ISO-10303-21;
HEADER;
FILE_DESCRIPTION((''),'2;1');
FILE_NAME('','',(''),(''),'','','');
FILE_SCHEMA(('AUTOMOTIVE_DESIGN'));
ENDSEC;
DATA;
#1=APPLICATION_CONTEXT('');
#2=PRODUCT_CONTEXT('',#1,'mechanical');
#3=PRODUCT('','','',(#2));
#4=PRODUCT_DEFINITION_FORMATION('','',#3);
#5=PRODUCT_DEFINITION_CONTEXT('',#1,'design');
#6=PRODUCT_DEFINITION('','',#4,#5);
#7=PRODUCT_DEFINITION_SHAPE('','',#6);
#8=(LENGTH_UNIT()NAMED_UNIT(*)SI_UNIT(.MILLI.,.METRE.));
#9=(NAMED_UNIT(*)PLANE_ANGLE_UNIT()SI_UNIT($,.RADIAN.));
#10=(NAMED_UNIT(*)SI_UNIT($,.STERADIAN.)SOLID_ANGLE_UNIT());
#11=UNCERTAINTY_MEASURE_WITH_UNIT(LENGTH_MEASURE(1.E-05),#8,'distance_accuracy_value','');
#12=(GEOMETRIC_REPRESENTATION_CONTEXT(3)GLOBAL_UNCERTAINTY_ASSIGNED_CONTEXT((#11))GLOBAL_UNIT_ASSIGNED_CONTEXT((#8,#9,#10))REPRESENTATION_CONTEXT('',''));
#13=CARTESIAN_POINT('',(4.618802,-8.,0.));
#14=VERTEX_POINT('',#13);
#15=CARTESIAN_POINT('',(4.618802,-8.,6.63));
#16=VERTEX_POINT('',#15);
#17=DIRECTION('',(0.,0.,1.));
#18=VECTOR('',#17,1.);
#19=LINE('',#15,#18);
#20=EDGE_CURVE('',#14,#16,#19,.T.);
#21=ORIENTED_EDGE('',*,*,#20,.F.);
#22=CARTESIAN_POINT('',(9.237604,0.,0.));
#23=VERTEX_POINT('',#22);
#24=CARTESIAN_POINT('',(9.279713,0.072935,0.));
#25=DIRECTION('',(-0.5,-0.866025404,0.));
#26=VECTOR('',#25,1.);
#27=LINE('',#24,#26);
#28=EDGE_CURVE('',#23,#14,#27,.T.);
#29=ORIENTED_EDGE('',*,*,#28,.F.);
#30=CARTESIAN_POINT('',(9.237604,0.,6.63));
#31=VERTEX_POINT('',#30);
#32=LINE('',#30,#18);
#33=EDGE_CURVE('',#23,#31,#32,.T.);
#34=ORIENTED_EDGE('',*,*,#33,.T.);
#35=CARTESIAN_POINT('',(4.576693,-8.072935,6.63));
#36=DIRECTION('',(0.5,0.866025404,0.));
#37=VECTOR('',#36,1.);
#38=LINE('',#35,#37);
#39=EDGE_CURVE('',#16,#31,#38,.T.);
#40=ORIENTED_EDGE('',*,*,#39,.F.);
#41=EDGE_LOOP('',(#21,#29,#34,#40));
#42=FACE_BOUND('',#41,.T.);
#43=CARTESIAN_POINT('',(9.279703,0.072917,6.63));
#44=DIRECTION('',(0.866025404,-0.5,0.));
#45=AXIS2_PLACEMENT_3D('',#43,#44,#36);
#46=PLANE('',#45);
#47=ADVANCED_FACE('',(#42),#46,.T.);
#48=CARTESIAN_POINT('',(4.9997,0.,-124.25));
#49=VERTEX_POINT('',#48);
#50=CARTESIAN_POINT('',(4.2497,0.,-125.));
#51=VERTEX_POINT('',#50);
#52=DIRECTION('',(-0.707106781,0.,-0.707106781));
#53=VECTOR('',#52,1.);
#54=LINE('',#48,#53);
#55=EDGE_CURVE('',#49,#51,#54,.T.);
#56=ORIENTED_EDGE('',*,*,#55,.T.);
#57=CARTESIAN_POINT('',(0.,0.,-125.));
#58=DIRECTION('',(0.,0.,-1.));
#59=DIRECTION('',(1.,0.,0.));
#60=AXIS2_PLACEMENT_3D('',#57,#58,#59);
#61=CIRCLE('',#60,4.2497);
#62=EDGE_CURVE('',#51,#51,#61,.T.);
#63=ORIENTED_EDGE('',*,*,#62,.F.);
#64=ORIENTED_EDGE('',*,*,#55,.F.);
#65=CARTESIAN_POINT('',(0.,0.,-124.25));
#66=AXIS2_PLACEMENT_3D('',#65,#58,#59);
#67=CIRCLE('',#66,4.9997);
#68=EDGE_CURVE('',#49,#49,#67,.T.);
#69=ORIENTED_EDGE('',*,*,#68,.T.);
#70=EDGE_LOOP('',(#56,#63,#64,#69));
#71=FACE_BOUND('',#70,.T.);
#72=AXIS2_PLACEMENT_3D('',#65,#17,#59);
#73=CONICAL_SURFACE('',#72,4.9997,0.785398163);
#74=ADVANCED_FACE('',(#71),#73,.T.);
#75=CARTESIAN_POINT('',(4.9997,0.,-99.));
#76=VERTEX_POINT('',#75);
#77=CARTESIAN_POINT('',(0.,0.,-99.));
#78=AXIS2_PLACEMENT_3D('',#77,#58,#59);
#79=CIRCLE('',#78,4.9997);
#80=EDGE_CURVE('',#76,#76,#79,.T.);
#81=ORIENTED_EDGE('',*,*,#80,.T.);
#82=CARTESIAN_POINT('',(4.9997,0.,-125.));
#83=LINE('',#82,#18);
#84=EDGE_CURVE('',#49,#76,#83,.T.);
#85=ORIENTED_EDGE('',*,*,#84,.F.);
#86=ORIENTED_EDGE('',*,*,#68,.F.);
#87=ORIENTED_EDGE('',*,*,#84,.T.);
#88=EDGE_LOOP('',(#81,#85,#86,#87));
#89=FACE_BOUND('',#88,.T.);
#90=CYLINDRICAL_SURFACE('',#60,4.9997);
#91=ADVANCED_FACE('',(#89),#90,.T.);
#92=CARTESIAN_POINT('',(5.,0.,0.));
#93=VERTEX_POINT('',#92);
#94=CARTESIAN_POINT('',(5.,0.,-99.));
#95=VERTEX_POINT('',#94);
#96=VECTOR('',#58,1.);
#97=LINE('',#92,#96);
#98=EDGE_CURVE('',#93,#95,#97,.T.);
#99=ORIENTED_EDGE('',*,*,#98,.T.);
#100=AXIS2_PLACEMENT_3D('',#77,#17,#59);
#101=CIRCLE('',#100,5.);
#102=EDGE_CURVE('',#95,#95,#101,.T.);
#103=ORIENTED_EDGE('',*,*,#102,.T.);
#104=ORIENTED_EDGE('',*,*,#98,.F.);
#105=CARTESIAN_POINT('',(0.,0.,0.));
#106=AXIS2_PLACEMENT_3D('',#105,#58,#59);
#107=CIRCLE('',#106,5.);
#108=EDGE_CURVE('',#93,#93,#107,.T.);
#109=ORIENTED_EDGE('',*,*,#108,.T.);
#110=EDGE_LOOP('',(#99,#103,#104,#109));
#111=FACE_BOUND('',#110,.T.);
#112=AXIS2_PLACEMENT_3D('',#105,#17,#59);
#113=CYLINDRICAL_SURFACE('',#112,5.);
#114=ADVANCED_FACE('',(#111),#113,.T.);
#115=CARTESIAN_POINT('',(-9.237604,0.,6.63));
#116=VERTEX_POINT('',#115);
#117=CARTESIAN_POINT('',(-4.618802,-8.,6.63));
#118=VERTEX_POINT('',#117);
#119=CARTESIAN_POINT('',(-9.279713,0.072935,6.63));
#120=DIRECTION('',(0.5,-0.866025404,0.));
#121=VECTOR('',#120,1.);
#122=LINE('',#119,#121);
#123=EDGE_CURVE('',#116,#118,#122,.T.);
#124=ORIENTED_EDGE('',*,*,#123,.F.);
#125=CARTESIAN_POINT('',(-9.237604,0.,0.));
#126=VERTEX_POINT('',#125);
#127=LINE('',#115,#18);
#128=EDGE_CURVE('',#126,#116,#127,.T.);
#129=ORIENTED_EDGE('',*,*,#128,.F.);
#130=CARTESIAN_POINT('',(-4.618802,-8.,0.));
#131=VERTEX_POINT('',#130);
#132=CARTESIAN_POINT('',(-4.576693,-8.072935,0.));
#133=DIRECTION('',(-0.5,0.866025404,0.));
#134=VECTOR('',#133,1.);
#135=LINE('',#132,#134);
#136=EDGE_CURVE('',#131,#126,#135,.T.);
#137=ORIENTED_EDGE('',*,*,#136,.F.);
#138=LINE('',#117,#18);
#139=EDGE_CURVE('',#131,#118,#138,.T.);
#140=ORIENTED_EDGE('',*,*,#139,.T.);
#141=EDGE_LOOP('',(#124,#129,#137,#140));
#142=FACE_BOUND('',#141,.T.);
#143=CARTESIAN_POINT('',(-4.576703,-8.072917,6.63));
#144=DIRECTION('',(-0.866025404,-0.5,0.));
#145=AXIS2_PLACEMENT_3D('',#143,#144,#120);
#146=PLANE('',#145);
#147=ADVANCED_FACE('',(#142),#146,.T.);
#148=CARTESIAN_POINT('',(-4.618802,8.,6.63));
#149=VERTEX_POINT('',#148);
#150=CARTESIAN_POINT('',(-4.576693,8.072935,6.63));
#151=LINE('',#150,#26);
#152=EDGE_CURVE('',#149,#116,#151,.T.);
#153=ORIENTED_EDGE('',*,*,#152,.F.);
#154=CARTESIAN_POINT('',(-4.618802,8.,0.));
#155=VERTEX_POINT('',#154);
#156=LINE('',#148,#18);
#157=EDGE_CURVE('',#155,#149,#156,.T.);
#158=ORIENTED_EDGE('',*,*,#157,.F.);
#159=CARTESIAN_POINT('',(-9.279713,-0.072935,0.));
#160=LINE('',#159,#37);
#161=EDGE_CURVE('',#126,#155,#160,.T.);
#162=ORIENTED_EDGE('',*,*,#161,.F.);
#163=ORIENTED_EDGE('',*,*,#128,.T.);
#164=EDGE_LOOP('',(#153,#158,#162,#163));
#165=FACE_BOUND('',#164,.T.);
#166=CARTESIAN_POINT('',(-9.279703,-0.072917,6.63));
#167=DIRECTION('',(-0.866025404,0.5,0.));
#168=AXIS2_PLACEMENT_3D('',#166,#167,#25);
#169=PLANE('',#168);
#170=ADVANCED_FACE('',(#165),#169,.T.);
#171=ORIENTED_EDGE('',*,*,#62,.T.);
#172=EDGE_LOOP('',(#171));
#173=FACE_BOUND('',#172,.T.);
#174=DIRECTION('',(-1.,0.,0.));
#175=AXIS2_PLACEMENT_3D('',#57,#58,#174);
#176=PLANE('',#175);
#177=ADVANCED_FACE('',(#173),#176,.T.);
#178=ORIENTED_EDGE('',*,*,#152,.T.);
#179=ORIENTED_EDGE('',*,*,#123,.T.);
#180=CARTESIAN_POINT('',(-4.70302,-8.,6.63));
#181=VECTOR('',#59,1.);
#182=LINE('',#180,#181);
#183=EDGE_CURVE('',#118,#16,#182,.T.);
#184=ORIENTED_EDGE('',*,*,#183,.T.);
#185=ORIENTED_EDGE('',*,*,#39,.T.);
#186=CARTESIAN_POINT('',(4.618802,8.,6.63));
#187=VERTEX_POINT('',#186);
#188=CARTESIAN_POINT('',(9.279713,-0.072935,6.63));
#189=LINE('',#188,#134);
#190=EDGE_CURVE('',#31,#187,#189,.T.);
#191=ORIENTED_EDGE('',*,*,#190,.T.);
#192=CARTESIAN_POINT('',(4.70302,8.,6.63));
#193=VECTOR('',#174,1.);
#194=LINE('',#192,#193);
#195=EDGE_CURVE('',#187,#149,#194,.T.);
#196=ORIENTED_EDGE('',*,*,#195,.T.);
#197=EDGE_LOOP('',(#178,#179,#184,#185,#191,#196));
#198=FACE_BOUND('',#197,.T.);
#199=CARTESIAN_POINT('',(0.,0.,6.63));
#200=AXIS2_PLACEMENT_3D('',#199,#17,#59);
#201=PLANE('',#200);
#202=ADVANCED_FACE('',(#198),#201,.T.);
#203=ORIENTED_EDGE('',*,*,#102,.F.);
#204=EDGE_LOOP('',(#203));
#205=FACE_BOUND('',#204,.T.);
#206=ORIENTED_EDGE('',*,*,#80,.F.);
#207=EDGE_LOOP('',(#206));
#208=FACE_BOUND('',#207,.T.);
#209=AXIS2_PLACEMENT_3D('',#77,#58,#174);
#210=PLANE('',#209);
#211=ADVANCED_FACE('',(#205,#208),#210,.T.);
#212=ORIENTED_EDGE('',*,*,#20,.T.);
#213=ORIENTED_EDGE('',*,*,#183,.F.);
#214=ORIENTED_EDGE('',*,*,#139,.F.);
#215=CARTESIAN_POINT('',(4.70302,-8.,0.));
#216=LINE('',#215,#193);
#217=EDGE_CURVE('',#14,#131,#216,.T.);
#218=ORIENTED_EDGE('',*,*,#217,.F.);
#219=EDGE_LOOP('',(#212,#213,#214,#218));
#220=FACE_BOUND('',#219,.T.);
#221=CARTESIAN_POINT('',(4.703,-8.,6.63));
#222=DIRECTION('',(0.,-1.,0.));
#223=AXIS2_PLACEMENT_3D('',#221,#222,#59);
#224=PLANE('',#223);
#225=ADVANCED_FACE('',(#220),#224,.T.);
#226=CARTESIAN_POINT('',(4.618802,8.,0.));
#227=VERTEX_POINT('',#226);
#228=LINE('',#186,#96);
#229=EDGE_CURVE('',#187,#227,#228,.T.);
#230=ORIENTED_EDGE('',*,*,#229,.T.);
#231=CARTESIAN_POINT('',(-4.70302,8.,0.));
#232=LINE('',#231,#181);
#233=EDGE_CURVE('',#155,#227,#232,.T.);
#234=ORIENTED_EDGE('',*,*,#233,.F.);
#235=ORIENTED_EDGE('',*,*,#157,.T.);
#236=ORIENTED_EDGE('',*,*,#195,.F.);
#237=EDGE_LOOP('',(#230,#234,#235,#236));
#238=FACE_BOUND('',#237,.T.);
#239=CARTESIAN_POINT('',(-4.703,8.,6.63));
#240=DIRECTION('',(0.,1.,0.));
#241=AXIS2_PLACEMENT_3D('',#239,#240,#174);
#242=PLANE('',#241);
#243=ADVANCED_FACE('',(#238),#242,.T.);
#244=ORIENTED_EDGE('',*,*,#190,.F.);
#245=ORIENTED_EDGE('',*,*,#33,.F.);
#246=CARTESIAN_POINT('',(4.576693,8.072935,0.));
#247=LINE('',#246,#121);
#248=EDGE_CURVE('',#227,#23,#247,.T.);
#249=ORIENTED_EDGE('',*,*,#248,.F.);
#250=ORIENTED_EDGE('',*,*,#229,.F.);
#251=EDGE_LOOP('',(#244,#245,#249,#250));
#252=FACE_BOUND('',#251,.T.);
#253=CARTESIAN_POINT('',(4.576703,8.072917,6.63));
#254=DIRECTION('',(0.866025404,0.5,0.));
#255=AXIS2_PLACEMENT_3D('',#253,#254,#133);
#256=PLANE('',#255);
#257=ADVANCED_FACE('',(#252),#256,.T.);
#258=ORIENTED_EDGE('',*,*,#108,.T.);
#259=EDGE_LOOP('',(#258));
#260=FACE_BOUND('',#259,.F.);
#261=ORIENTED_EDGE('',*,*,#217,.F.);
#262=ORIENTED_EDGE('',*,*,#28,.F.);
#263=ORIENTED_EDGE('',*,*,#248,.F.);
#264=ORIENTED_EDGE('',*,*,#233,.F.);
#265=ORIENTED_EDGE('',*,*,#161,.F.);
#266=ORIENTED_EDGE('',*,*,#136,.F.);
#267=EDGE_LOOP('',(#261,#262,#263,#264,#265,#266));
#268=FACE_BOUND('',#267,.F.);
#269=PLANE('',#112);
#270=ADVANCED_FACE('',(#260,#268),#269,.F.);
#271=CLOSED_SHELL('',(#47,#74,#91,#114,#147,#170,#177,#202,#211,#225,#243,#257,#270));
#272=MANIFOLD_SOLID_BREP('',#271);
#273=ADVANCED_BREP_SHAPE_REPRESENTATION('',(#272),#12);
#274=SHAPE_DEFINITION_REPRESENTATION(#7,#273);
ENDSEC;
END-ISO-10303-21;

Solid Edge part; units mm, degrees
sketch "Sketch1" plane through (0, 0, 0) normal (0, 0, 1) x (1, 0, 0)
  circle A0 centre (0, 0) radius 9.28
  dimension "D1" = 18.56
extrude "Protrusion1" add sketch "Sketch1" along normal blind 6.63
sketch "Sketch2" plane through (0, 0, 0) normal (0, 0, -1) x (1, 0, 0)
  circle A0 centre (0, 0) radius 5
extrude "Protrusion2" add sketch "Sketch2" along normal blind 125
sketch "Sketch3" plane through (0, 0, -125) normal (0, 0, -1) x (1, 0, 0)
  circle A0 centre (0, 0) radius 4.9997
extrude "Cutout1" cut sketch "Sketch3" against normal blind 26 flip side to cut
chamfer "Chamfer_1" distance 0.75 angle 45 1 edges at (-4.9997, 0, -125)
sketch "Sketch4" plane through (0, 0, 6.63) normal (0, 0, 1) x (1, 0, 0)
  line L0 (-4.703, 8) -> (4.703, 8)
  dimension "D1" = 16
extrude "Cutout2" cut sketch "Sketch4" against normal up to next material side at (0, 8.05, 6.63)
pattern_circular "Pattern1" count 6 over 360 about axis through (0, 0, 6.63) along (0, 0, 1) of "Cutout2"
properties part number "24101235"
